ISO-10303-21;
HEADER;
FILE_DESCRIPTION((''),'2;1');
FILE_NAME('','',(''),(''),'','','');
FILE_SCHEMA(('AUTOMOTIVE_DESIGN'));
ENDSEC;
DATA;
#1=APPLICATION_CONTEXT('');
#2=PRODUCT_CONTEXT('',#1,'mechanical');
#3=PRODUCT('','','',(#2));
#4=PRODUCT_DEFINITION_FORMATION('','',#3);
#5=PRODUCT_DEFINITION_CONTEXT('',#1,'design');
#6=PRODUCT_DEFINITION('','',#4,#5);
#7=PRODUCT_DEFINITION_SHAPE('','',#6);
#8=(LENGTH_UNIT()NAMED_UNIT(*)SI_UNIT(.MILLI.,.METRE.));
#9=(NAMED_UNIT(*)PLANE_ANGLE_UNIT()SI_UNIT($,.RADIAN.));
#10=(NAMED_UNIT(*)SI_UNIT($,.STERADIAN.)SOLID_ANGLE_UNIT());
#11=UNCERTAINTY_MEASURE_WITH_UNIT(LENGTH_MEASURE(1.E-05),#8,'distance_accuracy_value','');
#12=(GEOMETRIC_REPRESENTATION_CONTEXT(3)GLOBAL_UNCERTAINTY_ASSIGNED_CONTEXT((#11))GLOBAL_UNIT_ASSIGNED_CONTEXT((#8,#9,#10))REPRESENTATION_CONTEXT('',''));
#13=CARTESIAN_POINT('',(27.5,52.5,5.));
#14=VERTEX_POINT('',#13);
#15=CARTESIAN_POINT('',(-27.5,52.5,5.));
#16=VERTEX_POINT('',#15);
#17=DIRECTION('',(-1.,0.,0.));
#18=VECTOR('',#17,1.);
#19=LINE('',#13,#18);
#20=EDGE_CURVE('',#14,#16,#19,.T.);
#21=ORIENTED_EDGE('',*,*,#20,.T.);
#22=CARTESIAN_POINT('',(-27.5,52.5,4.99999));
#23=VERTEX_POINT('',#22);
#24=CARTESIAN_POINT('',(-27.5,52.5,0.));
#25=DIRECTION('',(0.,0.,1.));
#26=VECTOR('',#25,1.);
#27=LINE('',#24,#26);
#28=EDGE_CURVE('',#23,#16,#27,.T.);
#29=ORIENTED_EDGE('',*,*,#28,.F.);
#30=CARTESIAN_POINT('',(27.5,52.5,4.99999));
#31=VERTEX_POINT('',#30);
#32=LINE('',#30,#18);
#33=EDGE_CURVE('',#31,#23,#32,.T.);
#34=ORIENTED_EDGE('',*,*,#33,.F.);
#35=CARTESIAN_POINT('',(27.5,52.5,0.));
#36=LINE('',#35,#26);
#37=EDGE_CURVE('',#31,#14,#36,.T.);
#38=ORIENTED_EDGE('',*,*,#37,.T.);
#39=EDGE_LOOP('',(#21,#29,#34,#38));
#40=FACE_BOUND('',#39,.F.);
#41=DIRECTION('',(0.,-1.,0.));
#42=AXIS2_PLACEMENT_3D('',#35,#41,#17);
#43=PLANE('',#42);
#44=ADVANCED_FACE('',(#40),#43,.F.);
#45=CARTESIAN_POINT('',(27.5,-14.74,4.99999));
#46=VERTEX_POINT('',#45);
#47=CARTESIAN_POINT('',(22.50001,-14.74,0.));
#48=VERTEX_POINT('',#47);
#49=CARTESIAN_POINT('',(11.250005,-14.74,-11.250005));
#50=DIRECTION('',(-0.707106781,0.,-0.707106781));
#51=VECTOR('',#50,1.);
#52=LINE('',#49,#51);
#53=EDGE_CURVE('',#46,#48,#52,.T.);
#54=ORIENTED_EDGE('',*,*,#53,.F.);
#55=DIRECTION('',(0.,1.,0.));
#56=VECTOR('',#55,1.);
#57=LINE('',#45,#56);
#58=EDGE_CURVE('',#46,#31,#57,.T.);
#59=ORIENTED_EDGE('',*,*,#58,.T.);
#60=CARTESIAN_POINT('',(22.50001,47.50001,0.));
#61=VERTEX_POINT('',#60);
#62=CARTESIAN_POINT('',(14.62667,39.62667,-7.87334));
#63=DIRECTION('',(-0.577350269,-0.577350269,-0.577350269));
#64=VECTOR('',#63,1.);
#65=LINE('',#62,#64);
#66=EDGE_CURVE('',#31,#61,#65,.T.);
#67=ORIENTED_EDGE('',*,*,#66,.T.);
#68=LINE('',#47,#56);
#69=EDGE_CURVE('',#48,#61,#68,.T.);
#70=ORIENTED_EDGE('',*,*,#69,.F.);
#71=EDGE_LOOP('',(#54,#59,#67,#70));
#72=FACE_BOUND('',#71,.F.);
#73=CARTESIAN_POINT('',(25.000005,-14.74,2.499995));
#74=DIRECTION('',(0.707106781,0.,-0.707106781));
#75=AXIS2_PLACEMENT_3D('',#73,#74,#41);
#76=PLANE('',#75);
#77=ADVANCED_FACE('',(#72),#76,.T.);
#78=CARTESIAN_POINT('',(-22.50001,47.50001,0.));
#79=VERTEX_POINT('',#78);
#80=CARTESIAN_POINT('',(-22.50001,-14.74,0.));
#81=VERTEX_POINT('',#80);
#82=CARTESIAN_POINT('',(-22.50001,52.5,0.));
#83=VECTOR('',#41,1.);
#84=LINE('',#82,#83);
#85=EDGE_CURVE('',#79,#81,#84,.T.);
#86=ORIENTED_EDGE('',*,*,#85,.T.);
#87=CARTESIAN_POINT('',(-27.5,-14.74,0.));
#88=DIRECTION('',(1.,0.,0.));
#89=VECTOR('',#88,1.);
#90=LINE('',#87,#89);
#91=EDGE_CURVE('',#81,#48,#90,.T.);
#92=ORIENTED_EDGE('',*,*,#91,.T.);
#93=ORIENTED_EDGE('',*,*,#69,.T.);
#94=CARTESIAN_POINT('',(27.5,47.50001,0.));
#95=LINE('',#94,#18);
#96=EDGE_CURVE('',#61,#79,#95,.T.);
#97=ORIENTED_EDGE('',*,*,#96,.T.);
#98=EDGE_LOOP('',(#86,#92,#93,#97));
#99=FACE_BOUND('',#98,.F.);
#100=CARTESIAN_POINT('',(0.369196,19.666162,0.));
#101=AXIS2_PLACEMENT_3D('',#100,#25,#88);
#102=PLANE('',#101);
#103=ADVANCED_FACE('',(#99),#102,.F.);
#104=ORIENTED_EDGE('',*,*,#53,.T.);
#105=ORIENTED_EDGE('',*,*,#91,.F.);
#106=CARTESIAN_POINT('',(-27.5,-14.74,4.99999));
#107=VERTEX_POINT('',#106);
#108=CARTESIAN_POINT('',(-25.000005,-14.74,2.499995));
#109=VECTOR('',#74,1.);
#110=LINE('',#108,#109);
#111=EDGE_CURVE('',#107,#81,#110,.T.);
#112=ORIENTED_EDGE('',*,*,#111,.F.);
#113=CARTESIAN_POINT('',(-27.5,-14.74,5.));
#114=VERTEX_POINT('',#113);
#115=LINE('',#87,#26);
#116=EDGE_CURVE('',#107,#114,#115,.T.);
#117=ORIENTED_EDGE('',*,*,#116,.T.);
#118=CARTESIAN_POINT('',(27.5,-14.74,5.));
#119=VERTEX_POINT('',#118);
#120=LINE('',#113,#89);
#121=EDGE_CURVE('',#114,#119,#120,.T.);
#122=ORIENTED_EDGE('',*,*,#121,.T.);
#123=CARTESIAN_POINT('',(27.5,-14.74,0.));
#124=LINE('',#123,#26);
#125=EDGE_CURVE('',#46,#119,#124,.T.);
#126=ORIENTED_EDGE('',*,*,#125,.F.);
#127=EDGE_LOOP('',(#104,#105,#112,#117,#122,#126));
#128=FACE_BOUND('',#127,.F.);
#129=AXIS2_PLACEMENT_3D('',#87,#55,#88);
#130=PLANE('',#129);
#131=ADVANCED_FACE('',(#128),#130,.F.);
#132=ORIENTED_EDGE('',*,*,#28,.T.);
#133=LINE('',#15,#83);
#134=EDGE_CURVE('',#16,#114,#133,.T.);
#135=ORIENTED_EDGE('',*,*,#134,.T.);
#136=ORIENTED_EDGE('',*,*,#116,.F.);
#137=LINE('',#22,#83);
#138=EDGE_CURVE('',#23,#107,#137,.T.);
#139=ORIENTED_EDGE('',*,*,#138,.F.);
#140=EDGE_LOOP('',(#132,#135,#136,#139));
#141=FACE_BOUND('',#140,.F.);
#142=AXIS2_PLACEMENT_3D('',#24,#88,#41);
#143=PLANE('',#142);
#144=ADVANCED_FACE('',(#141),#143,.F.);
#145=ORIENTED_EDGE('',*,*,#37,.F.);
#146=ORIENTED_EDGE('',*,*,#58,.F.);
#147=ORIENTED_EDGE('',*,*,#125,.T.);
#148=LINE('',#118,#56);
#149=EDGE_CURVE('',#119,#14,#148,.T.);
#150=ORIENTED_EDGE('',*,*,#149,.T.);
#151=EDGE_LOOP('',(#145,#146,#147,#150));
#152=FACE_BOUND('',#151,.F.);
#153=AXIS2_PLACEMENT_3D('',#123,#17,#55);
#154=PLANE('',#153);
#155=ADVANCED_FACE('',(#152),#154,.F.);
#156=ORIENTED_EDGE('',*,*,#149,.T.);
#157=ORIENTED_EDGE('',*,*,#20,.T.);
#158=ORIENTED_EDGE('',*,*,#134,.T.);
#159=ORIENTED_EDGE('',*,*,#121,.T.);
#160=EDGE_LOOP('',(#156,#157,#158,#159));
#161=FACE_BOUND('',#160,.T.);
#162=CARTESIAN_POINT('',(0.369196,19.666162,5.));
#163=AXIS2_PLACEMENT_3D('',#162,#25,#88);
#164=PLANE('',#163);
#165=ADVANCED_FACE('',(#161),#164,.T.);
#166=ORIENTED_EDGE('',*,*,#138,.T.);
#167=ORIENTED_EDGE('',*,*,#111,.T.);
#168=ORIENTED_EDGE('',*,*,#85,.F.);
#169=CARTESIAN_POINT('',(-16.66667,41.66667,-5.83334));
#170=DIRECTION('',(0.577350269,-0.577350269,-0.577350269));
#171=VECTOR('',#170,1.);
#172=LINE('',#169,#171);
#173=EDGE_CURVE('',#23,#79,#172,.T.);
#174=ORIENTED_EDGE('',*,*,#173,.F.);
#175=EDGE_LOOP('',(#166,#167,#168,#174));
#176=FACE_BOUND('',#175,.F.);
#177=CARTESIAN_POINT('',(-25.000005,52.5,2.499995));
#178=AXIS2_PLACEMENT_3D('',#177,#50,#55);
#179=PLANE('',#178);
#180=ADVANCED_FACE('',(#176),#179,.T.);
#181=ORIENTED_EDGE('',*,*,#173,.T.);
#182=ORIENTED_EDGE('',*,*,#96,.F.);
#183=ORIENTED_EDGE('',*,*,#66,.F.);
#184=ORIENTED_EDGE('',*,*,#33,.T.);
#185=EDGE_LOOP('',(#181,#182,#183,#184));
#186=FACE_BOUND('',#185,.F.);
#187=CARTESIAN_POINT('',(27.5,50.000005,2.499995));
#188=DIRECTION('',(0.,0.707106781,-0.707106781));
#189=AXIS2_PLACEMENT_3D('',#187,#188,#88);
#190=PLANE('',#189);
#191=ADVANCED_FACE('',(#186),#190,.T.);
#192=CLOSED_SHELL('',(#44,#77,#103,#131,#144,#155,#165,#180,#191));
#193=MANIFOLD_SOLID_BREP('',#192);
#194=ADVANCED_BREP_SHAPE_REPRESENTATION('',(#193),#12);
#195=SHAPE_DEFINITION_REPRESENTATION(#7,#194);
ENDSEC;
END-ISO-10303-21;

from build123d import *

# Parameters (mm, degrees)
F1_DEPTH = 5
F2_SIZE  = 4.99999


# Not quite as in the source:
# - a fillet or chamfer is up to 0.001 mm smaller than in the source, because OpenCascade refuses the exact size


with BuildPart() as f1:
    # F0 (on Top) → F1 (new body)
    with BuildSketch(Plane.XY):
        Polygon((-27.5, -11.5), (27.5, -14.74), (27.5, 52.5), (-27.5, 52.5), align=None)
        Polygon((-27.5, -14.74), (27.5, -14.74), (-27.5, -11.5), align=None)
    extrude(amount=F1_DEPTH)

    # F2 (size 5 in the source; OpenCascade refuses exactly that, so slightly less here)
    f2_edges = [f1.edges().sort_by_distance(p)[0] for p in [
        (27.5, 18.88, 0),
        (0, 52.5, 0),
        (-27.5, 18.88, 0),
    ]]
    chamfer(f2_edges, length=F2_SIZE)


solid = f1.part
